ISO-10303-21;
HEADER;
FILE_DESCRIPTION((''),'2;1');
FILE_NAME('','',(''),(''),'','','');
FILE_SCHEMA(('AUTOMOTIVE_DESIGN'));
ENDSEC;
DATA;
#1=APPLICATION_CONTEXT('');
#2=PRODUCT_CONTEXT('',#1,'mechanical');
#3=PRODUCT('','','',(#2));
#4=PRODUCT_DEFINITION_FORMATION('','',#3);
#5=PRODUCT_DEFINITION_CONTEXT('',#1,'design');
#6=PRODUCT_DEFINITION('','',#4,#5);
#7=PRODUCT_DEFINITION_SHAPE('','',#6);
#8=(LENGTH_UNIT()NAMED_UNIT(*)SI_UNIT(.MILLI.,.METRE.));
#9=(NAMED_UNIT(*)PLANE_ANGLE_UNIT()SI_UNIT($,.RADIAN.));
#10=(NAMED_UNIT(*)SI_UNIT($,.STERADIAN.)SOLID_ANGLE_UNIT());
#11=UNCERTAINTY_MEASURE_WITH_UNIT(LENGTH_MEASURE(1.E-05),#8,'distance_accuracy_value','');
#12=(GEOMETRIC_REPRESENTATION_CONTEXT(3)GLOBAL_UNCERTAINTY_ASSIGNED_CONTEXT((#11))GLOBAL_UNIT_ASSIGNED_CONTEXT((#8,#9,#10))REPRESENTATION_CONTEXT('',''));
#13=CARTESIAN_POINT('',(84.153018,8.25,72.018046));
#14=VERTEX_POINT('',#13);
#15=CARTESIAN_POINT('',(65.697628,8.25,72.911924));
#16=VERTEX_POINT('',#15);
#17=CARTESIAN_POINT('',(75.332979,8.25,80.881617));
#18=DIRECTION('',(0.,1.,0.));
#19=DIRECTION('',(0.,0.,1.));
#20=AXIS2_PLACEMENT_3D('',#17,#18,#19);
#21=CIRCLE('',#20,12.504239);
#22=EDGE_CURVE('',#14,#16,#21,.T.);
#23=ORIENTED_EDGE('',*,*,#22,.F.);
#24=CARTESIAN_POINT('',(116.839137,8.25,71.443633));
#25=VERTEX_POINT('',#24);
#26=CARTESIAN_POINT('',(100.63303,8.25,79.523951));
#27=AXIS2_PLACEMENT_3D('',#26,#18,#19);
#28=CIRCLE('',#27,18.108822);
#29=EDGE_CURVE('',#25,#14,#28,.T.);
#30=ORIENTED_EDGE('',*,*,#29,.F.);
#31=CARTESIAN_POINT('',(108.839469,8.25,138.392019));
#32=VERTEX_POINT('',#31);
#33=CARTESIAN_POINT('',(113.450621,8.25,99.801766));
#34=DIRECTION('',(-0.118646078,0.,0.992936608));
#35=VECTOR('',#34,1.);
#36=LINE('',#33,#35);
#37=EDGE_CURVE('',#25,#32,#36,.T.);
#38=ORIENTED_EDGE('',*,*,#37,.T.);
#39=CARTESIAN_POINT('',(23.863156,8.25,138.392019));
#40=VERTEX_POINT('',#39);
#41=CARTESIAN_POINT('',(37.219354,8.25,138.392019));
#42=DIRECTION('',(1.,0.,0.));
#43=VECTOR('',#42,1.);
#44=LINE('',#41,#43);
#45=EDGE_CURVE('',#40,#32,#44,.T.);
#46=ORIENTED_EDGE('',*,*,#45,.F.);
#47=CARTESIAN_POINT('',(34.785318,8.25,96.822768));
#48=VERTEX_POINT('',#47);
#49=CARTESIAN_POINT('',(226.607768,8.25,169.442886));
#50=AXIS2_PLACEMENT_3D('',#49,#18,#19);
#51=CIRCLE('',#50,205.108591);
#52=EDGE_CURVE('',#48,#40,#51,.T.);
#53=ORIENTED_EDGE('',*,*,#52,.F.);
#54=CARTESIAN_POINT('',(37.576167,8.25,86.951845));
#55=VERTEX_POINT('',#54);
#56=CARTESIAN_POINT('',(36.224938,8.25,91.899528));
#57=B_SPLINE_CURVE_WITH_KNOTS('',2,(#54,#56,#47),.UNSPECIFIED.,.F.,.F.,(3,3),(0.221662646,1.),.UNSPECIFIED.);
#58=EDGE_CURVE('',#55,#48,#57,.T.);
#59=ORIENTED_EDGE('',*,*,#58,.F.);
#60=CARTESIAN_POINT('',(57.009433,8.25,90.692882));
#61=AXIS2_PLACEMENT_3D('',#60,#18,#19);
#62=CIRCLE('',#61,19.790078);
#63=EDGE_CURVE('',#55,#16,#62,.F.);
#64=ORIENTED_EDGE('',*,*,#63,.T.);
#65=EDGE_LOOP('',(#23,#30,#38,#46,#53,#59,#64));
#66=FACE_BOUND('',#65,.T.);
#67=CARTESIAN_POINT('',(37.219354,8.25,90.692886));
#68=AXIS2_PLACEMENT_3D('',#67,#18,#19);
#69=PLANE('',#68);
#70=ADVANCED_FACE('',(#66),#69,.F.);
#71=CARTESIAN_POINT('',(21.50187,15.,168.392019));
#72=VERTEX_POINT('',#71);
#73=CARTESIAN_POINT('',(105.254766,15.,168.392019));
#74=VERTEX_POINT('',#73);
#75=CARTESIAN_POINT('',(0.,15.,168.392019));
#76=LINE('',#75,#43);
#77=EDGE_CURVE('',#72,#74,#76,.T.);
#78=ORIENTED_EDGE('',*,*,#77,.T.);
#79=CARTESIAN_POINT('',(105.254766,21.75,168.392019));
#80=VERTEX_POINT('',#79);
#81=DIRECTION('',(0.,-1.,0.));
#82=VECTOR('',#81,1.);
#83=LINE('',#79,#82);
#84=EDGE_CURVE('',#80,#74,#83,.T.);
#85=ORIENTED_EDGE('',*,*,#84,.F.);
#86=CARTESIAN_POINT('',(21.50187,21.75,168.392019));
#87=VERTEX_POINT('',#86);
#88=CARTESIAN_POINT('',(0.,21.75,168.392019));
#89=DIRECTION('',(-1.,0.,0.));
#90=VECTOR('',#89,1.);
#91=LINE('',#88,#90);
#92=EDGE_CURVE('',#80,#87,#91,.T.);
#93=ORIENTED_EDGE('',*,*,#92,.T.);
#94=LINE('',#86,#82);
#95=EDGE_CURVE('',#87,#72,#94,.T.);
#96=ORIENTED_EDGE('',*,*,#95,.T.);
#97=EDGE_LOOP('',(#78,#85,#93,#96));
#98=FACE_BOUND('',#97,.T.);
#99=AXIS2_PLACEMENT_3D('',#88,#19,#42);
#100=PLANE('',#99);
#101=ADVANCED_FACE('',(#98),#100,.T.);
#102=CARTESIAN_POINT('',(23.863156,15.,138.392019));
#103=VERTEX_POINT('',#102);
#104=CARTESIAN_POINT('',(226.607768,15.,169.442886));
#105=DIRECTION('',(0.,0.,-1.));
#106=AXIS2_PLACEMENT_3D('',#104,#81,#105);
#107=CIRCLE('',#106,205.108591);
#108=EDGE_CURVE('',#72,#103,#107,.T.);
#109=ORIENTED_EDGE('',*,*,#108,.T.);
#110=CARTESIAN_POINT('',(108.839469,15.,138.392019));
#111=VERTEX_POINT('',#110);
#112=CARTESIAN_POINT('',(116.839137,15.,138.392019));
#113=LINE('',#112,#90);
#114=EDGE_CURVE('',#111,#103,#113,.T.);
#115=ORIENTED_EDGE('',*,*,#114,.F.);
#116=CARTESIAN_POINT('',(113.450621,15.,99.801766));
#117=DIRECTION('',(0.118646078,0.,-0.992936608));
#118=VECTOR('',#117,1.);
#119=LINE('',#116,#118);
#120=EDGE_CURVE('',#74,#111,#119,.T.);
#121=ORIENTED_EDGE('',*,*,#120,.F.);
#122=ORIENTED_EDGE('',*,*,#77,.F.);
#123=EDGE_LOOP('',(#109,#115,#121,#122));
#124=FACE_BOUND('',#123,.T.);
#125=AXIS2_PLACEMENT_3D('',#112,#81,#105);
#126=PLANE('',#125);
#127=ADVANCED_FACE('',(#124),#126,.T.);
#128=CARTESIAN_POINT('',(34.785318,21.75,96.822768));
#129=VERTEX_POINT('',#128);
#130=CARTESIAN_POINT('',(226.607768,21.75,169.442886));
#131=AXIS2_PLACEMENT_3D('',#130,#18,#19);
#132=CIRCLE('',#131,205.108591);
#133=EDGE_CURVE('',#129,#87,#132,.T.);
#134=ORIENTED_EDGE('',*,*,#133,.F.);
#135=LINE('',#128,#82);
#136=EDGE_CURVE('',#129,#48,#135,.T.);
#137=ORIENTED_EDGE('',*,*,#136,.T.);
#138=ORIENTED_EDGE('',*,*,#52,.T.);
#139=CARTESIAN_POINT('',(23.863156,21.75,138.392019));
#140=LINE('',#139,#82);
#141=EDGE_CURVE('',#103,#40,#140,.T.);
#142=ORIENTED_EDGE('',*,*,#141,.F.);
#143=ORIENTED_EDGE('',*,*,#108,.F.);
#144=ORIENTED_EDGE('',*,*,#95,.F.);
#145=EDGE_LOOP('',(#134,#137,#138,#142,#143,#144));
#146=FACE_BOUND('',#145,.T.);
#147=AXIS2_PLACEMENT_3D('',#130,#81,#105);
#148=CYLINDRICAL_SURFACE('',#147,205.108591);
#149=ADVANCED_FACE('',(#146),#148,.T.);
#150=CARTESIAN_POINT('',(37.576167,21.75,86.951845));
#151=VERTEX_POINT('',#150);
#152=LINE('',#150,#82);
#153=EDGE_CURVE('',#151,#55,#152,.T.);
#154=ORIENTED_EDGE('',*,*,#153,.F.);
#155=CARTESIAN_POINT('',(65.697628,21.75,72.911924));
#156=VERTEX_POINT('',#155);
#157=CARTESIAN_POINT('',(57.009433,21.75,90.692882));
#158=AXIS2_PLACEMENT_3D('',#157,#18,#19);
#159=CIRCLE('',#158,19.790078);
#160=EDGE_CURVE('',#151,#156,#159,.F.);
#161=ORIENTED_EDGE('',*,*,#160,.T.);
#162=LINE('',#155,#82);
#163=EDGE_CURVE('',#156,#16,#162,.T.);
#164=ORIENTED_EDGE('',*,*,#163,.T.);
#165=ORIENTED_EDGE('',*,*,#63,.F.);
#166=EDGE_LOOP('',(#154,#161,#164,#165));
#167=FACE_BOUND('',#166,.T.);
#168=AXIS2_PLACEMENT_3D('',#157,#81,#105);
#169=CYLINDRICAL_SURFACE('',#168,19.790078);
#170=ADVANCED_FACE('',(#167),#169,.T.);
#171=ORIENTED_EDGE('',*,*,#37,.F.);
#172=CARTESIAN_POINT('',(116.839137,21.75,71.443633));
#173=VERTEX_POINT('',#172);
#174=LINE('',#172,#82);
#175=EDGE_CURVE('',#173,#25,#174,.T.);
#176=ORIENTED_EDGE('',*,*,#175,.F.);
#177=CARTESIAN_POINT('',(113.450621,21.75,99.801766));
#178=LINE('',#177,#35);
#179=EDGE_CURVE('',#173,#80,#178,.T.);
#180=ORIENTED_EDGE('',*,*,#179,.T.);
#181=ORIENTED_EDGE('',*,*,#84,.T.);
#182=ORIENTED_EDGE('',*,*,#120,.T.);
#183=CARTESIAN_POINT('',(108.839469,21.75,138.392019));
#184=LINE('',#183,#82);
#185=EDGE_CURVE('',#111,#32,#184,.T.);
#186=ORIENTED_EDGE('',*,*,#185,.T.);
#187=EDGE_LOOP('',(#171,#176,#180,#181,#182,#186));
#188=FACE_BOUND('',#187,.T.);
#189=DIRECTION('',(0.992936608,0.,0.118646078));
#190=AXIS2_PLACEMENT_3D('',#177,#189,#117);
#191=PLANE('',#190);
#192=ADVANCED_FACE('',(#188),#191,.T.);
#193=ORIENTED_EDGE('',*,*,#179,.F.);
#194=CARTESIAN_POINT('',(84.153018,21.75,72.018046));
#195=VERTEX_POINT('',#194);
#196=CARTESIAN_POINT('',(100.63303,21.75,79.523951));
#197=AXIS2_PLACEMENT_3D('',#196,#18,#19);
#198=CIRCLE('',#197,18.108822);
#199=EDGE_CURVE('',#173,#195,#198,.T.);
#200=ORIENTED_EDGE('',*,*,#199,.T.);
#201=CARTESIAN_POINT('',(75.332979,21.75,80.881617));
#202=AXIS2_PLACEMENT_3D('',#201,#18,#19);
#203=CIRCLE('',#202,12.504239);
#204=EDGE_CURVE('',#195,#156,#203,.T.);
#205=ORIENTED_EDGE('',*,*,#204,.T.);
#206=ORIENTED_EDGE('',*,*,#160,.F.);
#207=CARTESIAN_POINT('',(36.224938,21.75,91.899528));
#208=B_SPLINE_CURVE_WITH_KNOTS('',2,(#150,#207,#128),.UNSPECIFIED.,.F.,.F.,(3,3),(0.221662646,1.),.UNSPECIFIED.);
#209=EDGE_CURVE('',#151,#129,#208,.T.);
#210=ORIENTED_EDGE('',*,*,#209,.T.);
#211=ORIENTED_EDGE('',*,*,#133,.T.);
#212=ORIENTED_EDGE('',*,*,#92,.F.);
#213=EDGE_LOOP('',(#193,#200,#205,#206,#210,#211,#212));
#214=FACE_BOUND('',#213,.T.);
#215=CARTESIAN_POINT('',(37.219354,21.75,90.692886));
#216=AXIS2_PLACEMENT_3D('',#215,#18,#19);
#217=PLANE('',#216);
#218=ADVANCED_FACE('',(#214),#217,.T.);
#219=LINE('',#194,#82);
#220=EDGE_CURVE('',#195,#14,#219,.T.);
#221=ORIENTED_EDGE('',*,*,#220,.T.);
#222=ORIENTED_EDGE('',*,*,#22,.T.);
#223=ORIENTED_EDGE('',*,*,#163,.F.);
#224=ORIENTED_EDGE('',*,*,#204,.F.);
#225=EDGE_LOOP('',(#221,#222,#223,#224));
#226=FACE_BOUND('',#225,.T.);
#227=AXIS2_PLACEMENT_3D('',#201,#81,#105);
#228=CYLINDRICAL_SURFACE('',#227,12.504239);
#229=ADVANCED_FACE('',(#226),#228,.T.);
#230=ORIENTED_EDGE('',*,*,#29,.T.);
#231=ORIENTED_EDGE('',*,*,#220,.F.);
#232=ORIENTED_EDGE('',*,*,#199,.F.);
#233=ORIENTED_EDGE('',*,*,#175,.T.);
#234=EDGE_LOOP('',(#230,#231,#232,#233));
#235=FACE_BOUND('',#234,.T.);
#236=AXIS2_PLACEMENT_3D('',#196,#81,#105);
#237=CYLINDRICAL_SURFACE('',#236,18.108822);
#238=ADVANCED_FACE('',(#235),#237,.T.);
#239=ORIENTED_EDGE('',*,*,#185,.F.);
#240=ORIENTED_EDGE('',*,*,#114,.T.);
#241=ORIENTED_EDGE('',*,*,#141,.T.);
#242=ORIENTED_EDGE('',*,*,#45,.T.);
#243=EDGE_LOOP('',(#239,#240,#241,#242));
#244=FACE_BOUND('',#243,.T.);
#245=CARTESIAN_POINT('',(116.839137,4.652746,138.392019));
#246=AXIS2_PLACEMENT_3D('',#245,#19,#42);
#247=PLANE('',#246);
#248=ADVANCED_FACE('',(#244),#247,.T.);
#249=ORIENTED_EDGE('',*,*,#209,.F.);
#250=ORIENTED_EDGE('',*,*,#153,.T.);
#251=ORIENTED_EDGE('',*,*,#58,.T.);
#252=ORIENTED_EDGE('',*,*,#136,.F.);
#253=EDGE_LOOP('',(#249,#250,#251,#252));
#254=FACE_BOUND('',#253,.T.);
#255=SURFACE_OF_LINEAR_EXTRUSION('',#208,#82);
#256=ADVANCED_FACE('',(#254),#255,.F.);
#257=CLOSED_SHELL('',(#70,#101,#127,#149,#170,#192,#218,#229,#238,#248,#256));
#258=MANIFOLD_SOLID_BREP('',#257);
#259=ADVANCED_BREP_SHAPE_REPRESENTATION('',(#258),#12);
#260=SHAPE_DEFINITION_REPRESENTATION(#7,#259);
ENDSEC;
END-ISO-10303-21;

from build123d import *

# Parameters (mm, degrees)
PIED_GAUCHE_SYM_TRIQUE_START = 8.25
PIED_GAUCHE_SYM_TRIQUE_DEPTH = 13.5
ESQUISSE2_W                  = 127.532024566
ESQUISSE2_H                  = 119.503632389
ENL_V_MAT_EXTRU_3_DEPTH      = 302.826111243
ESQUISSE3_W                  = 31.738465923
ESQUISSE3_H                  = 10.347254195
ENL_V_MAT_EXTRU_5_DEPTH      = 207.107541608


# Read off the part's stored shape, not the designer's step: pied_gauche_Symétrique
with BuildPart() as part:
    # pied_gauche_Symétrique outline → pied_gauche_Symétrique (new body)
    with BuildSketch(Plane(origin=(0, 0, 0), x_dir=(1, 0, 0), z_dir=(0, 1, 0)).offset(PIED_GAUCHE_SYM_TRIQUE_START)):
        with BuildLine():
            add(Edge.make_bspline(
                [(37.478644966, -252.078923217), (36.315942048, -246.147042601), (34.178554605, -240.439587675)],
                knots=[0.172395677, 0.172395677, 0.172395677, 1, 1, 1], degree=2))
            ThreePointArc((37.478644966, -252.078923217), (68.296716845, -277.385748803), (95.718365725, -248.433337016))
            ThreePointArc((95.718365725, -248.433337016), (95.727304168, -248.184441724), (95.749998935, -247.936422149))
            Line((95.749998935, -247.936422149), (116.839136919, -71.443633134))
            ThreePointArc((116.839136919, -71.443633134), (100.314842401, -61.417925092), (84.153017918, -72.018045866))
            ThreePointArc((84.153017918, -72.018045866), (74.728050938, -68.392019497), (65.697628344, -72.911924095))
            ThreePointArc((65.697628344, -72.911924095), (48.169524668, -72.986859822), (37.57616681, -86.951844718))
            add(Edge.make_bspline(
                [(37.57616681, -86.951844718), (36.224938138, -91.89952807), (34.78531821, -96.822767534)],
                knots=[0.221662646, 0.221662646, 0.221662646, 1, 1, 1], degree=2))
            ThreePointArc((34.78531821, -96.822767534), (21.501008197, -168.576334761), (34.178554605, -240.439587675))
        make_face()
    extrude(amount=PIED_GAUCHE_SYM_TRIQUE_DEPTH)

    # Esquisse2 → Enlèv. mat.-Extru.3 (cut, through all)
    with BuildSketch(Plane(origin=(0, 0, 0), x_dir=(1, 0, 0), z_dir=(0, 1, 0))):
        with Locations((63.766012283, -228.143835691)):
            Rectangle(ESQUISSE2_W, ESQUISSE2_H)
    extrude(amount=ENL_V_MAT_EXTRU_3_DEPTH, mode=Mode.SUBTRACT)

    # Esquisse3 → Enlèv. mat.-Extru.5 (cut, through all)
    with BuildSketch(Plane(origin=(0, 0, 0), x_dir=(0, 0, -1), z_dir=(1, 0, 0))):
        with Locations((-154.261252458, 9.826372903)):
            Rectangle(ESQUISSE3_W, ESQUISSE3_H)
    extrude(amount=ENL_V_MAT_EXTRU_5_DEPTH, mode=Mode.SUBTRACT)


solid = part.part
